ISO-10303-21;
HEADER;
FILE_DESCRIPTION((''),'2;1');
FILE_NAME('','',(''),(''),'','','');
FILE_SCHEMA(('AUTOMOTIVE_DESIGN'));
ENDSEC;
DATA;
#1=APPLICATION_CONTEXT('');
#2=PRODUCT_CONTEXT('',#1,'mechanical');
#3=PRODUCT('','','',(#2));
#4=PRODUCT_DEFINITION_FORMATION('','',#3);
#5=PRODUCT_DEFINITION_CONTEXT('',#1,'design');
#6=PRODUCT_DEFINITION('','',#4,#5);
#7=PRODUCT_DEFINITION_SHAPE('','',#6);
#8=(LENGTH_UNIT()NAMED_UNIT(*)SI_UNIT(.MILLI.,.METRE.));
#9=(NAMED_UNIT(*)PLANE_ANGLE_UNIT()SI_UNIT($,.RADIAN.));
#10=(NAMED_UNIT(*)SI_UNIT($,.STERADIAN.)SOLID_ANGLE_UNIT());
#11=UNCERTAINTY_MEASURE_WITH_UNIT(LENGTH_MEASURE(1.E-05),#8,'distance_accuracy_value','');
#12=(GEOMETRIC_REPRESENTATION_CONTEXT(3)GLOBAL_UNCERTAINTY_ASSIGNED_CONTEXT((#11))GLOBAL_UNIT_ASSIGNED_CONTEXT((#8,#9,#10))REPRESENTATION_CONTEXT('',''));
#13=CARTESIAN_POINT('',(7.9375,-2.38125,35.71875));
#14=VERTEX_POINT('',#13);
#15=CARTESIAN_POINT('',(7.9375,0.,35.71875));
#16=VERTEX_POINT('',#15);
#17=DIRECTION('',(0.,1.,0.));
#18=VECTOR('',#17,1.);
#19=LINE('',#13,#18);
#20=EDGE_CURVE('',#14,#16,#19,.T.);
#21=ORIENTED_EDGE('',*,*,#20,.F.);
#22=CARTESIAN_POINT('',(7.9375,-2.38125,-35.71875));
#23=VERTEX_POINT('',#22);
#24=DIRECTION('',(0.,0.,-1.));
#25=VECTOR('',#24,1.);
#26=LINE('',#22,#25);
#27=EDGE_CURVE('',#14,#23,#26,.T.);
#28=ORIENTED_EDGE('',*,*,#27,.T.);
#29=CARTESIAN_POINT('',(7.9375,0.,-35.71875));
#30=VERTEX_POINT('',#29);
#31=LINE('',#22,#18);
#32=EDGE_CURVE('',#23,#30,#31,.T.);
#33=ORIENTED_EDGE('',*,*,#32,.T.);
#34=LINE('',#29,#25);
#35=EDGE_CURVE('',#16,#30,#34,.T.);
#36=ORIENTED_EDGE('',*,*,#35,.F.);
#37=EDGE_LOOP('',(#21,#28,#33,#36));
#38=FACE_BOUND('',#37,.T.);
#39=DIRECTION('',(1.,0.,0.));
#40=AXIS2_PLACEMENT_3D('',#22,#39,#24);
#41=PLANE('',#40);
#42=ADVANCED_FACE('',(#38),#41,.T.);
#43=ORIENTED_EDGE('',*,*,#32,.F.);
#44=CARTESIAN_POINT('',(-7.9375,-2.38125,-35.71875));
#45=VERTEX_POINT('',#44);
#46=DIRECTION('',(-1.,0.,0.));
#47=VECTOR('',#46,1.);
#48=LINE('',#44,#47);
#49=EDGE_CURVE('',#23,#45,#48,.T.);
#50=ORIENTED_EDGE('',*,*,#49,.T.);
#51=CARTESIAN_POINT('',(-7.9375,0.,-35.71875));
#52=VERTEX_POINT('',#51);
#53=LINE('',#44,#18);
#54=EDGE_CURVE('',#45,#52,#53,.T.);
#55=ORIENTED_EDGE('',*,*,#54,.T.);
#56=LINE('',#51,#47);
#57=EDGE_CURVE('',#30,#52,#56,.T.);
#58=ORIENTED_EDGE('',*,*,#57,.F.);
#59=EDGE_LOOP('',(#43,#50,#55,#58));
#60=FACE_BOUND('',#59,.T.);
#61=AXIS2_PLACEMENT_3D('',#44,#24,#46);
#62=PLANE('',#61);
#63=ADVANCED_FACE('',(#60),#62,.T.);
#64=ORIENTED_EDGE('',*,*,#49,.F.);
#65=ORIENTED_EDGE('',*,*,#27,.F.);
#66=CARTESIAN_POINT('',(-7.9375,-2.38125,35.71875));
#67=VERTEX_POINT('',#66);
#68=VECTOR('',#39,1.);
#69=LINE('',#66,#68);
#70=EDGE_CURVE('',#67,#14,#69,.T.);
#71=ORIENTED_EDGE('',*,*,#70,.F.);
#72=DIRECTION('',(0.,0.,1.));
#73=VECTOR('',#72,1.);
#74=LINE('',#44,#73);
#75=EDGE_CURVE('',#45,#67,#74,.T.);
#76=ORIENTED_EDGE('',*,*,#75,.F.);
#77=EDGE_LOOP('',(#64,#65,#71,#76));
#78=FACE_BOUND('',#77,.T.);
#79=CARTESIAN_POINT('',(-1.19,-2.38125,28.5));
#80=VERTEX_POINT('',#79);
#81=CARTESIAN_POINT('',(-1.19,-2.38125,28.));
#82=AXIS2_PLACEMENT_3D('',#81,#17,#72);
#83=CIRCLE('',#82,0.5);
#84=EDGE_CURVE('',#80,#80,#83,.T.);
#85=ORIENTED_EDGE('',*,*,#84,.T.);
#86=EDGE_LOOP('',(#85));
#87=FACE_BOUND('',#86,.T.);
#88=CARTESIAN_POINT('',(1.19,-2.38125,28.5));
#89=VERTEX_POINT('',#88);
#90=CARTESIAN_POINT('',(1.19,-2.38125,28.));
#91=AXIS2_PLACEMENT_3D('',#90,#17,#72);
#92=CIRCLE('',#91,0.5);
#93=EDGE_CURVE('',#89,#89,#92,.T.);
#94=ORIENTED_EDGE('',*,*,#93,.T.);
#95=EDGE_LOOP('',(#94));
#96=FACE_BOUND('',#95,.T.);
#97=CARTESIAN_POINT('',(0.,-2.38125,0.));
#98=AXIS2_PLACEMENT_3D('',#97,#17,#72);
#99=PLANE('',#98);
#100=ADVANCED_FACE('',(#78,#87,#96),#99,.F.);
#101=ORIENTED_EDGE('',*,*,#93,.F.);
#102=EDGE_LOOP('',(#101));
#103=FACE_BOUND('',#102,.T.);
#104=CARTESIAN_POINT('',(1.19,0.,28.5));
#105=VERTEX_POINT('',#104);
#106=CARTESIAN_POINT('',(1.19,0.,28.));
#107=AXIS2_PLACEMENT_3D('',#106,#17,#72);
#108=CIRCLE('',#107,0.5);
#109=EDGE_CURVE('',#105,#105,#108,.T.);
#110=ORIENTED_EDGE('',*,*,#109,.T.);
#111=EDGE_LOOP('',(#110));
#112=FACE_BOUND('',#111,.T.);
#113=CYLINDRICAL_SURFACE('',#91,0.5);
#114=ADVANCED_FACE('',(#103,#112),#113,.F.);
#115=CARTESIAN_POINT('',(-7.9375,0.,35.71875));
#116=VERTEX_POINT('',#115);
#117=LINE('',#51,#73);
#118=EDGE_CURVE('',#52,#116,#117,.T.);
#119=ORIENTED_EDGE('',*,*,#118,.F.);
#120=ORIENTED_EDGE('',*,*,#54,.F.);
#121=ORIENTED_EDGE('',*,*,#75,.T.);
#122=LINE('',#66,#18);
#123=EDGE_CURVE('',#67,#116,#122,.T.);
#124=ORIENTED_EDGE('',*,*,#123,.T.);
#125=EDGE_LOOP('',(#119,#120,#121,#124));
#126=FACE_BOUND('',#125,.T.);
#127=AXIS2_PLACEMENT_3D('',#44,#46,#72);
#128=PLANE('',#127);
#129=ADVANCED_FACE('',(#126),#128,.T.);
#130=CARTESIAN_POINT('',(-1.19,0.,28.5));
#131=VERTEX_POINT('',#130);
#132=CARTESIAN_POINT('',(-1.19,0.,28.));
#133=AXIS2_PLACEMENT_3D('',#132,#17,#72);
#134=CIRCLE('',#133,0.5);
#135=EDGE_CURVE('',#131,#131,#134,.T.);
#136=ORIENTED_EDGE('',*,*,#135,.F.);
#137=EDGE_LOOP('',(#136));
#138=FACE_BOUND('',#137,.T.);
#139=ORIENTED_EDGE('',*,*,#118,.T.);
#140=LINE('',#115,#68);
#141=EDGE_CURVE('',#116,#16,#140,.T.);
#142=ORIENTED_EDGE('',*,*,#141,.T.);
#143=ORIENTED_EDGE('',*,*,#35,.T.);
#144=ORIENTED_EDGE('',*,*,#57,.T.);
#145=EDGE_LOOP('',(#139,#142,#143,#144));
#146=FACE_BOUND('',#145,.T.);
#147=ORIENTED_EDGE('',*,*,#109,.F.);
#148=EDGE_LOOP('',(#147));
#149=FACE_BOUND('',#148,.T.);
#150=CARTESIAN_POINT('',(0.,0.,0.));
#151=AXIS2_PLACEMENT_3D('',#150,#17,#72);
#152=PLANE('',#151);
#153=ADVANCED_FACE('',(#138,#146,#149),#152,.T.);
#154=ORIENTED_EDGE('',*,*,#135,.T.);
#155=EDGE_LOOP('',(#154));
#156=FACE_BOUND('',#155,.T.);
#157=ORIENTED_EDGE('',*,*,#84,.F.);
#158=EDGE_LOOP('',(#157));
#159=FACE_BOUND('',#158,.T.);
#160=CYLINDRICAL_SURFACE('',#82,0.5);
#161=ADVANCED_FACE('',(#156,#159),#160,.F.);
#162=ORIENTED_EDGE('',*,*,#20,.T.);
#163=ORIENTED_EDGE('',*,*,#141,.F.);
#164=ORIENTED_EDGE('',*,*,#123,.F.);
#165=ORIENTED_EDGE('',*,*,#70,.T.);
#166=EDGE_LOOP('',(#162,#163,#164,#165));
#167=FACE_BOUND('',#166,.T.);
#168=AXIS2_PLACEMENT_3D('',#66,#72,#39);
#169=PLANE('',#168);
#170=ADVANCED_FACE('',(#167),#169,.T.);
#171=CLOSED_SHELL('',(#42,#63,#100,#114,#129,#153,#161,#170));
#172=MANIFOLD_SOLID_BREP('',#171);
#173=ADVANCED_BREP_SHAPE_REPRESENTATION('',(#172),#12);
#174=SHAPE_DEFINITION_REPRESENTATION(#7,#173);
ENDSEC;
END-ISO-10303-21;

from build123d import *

# Parameters (mm, degrees)
SKETCH1_W          = 15.875
SKETCH1_H          = 71.4375
BASE_FLANGE1_DEPTH = 2.38125
SKETCH2_R          = 0.5
CUT_EXTRUDE1_DEPTH = 37.667470043


# Sheet-metal steps are written as plain solids
with BuildPart() as part:
    # Sketch1 → Base-Flange1 (new body)
    with BuildSketch(Plane(origin=(0, 0, 0), x_dir=(1, 0, 0), z_dir=(0, 1, 0))):
        Rectangle(SKETCH1_W, SKETCH1_H)
    extrude(amount=-BASE_FLANGE1_DEPTH)

    # Sketch2 → Cut-Extrude1 (cut, through all)
    with BuildSketch(Plane(origin=(0, 0, 0), x_dir=(1, 0, 0), z_dir=(0, 1, 0))):
        with Locations(Location((-1.19, -28, 0), (0, 0, 270))):
            Circle(SKETCH2_R)
        with Locations(Location((1.19, -28, 0), (0, 0, 270))):
            Circle(SKETCH2_R)
    extrude(amount=-CUT_EXTRUDE1_DEPTH, mode=Mode.SUBTRACT)


solid = part.part
